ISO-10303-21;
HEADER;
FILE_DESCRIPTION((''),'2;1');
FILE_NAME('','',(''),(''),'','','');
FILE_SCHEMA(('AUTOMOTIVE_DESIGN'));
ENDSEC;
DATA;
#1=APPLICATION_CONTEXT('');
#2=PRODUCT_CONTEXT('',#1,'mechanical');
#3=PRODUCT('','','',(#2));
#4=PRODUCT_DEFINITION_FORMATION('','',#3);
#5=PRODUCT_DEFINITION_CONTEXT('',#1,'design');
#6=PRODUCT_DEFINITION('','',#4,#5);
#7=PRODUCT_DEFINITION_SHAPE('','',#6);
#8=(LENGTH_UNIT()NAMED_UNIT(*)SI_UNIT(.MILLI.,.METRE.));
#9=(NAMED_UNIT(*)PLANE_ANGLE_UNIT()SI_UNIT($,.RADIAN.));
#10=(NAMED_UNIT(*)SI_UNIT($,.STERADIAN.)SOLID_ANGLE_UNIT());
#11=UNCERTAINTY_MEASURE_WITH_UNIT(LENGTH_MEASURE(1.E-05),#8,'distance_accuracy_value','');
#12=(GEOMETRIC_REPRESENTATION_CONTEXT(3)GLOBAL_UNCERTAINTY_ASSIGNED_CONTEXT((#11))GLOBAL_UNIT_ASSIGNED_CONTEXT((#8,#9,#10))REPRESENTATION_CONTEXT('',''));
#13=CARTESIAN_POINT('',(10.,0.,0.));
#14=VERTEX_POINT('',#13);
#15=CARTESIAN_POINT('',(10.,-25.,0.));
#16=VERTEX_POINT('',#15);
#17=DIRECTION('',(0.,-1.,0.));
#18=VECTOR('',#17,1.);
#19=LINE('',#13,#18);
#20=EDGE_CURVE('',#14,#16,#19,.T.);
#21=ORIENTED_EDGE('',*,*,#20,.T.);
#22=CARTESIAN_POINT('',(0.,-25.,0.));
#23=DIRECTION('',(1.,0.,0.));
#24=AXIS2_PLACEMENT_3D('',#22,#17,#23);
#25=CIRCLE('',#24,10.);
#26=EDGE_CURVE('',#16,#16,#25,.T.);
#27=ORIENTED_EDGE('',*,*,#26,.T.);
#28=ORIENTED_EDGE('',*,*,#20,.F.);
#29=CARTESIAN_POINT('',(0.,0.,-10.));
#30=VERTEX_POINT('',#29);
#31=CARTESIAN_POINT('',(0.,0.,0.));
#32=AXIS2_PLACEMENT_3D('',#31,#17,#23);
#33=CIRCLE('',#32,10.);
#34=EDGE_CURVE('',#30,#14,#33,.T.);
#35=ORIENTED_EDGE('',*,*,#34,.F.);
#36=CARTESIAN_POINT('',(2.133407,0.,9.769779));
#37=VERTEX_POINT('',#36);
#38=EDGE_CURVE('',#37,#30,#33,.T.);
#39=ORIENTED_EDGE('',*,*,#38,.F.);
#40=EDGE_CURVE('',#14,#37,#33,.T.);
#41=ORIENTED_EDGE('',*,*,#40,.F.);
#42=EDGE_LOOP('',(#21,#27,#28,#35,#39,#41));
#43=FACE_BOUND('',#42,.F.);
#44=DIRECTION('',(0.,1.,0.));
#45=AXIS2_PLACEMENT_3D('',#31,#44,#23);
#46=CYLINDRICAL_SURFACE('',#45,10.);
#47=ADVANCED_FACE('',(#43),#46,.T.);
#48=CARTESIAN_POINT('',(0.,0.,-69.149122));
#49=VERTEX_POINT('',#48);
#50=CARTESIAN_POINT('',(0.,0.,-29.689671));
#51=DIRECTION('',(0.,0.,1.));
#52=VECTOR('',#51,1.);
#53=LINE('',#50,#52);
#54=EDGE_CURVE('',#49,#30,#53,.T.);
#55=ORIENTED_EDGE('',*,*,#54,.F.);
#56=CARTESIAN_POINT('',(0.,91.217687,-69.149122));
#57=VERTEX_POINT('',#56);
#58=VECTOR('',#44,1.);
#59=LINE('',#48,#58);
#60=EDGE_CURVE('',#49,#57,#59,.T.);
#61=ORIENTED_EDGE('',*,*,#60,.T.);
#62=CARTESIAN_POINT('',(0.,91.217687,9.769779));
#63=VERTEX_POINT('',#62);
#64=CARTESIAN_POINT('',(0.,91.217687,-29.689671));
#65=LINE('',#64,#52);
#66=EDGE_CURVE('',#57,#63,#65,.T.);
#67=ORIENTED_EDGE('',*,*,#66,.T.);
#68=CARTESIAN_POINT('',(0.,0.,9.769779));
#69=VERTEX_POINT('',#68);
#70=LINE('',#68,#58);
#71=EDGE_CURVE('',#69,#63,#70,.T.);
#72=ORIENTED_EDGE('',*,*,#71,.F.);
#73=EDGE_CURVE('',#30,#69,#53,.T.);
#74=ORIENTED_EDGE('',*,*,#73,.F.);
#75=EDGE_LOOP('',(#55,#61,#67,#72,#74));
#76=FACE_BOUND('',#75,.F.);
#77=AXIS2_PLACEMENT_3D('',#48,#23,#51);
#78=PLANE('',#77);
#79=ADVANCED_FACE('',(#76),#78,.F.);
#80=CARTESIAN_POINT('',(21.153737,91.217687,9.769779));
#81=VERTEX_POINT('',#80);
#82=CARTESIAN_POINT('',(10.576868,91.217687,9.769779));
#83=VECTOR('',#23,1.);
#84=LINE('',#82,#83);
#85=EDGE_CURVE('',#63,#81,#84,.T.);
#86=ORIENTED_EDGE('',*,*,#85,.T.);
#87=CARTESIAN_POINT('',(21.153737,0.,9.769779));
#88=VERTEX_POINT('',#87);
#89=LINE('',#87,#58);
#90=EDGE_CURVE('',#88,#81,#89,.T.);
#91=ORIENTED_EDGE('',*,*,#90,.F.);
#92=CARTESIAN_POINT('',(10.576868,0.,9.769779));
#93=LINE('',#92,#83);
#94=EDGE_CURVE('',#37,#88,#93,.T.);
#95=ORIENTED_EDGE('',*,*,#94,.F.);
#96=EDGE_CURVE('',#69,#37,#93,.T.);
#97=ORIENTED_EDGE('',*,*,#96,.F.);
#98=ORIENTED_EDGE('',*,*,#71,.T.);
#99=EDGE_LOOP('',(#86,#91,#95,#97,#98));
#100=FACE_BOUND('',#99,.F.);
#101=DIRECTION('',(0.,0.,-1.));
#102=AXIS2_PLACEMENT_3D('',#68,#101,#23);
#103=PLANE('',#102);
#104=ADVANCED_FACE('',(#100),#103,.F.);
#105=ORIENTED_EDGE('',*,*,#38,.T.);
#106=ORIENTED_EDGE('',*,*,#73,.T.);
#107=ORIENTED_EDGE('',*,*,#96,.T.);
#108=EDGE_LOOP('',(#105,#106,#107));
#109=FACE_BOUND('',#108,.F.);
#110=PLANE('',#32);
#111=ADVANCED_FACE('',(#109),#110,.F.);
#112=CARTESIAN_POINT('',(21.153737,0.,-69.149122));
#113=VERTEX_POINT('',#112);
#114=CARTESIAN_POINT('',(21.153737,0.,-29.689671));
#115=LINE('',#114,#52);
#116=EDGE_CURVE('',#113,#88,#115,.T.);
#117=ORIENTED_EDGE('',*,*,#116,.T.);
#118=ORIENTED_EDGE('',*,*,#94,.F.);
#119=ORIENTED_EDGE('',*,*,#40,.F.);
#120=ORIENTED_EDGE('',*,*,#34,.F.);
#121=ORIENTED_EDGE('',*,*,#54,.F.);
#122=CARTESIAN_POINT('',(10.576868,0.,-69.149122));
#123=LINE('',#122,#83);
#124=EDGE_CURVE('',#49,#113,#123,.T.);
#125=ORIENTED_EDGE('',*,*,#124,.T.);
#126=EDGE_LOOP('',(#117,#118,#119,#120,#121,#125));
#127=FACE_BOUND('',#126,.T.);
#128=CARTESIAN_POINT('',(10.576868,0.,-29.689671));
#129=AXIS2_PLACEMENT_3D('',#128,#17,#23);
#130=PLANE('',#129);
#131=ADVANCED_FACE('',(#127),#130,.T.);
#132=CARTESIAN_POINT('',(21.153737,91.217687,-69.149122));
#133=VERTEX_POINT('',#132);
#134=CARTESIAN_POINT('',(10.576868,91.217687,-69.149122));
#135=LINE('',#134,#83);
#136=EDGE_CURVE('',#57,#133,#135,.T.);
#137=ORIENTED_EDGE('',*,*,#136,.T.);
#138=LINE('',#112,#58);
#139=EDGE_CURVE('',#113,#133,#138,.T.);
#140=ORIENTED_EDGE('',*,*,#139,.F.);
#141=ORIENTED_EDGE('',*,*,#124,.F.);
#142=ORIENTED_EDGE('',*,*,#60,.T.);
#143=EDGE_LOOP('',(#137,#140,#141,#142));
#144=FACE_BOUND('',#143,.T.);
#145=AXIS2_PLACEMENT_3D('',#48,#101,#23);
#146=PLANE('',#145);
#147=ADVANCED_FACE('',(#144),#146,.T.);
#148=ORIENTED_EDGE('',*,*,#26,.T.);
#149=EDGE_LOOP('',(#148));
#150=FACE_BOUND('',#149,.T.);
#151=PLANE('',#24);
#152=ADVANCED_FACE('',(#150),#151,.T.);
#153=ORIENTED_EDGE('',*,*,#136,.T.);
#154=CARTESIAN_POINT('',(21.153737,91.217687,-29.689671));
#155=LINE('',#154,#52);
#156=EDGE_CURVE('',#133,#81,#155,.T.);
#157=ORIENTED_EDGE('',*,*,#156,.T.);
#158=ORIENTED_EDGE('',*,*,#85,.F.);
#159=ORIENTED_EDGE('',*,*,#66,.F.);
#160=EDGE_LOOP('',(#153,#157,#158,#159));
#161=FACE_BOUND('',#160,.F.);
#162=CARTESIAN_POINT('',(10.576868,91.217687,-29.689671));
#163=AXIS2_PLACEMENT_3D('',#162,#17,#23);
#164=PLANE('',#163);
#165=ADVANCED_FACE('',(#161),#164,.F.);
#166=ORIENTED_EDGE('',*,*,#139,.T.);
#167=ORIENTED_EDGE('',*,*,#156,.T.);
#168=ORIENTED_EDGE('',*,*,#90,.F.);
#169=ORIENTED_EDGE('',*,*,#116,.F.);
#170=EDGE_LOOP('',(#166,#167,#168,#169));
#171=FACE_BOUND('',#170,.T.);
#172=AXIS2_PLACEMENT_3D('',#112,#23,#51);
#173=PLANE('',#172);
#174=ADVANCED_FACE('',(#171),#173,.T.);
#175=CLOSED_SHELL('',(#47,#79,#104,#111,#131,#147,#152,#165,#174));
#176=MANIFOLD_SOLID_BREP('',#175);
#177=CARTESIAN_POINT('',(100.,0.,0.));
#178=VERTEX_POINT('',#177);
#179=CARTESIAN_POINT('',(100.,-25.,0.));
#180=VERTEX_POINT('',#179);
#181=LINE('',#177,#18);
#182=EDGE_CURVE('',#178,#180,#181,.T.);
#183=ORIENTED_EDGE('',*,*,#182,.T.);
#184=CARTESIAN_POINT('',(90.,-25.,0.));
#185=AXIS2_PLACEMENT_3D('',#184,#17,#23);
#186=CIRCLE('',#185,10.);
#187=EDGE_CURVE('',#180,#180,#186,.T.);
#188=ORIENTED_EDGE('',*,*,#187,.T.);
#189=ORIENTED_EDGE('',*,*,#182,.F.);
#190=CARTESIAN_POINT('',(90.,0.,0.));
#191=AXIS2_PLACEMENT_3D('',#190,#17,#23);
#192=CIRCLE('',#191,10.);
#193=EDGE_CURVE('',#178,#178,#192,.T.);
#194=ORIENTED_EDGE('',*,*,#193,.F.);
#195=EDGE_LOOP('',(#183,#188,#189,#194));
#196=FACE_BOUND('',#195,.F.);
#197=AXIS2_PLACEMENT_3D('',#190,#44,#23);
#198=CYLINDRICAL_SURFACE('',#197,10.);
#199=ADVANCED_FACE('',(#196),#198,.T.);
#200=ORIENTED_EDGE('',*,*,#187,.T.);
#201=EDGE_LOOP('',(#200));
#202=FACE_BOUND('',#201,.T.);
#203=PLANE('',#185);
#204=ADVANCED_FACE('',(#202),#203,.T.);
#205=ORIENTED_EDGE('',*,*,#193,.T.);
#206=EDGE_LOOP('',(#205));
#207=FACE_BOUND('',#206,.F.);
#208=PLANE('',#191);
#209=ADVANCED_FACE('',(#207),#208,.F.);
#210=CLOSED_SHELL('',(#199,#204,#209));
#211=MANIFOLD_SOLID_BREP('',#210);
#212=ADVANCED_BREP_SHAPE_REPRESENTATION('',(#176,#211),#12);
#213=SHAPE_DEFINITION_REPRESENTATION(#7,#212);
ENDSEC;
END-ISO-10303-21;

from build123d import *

# Parameters (mm, degrees)
F0_R     = 10
F1_DEPTH = 25
F2_W     = 21.1537368596
F2_H     = 78.9189003408
F3_DEPTH = 91.2176873535


# Not quite as in the source:
# - a feature names something its author has since deleted; it is built from what else it names


with BuildPart() as f1:
    # F0 (on Front) → F1 (new body)
    with BuildSketch(Plane.XZ):
        Circle(F0_R)
    extrude(amount=F1_DEPTH)

    # F2 (on face) → F3 (join)
    with BuildSketch(Plane.XZ):
        with Locations((10.5768684298, -29.6896714717)):
            Rectangle(F2_W, F2_H)
    extrude(amount=-F3_DEPTH)


with BuildPart() as f1b:
    # F0 (on Front) → F1, piece 2 (new body)
    with BuildSketch(Plane.XZ):
        with Locations((90, 0)):
            Circle(F0_R)
    extrude(amount=F1_DEPTH)


solid = Compound([f1.part, f1b.part])
